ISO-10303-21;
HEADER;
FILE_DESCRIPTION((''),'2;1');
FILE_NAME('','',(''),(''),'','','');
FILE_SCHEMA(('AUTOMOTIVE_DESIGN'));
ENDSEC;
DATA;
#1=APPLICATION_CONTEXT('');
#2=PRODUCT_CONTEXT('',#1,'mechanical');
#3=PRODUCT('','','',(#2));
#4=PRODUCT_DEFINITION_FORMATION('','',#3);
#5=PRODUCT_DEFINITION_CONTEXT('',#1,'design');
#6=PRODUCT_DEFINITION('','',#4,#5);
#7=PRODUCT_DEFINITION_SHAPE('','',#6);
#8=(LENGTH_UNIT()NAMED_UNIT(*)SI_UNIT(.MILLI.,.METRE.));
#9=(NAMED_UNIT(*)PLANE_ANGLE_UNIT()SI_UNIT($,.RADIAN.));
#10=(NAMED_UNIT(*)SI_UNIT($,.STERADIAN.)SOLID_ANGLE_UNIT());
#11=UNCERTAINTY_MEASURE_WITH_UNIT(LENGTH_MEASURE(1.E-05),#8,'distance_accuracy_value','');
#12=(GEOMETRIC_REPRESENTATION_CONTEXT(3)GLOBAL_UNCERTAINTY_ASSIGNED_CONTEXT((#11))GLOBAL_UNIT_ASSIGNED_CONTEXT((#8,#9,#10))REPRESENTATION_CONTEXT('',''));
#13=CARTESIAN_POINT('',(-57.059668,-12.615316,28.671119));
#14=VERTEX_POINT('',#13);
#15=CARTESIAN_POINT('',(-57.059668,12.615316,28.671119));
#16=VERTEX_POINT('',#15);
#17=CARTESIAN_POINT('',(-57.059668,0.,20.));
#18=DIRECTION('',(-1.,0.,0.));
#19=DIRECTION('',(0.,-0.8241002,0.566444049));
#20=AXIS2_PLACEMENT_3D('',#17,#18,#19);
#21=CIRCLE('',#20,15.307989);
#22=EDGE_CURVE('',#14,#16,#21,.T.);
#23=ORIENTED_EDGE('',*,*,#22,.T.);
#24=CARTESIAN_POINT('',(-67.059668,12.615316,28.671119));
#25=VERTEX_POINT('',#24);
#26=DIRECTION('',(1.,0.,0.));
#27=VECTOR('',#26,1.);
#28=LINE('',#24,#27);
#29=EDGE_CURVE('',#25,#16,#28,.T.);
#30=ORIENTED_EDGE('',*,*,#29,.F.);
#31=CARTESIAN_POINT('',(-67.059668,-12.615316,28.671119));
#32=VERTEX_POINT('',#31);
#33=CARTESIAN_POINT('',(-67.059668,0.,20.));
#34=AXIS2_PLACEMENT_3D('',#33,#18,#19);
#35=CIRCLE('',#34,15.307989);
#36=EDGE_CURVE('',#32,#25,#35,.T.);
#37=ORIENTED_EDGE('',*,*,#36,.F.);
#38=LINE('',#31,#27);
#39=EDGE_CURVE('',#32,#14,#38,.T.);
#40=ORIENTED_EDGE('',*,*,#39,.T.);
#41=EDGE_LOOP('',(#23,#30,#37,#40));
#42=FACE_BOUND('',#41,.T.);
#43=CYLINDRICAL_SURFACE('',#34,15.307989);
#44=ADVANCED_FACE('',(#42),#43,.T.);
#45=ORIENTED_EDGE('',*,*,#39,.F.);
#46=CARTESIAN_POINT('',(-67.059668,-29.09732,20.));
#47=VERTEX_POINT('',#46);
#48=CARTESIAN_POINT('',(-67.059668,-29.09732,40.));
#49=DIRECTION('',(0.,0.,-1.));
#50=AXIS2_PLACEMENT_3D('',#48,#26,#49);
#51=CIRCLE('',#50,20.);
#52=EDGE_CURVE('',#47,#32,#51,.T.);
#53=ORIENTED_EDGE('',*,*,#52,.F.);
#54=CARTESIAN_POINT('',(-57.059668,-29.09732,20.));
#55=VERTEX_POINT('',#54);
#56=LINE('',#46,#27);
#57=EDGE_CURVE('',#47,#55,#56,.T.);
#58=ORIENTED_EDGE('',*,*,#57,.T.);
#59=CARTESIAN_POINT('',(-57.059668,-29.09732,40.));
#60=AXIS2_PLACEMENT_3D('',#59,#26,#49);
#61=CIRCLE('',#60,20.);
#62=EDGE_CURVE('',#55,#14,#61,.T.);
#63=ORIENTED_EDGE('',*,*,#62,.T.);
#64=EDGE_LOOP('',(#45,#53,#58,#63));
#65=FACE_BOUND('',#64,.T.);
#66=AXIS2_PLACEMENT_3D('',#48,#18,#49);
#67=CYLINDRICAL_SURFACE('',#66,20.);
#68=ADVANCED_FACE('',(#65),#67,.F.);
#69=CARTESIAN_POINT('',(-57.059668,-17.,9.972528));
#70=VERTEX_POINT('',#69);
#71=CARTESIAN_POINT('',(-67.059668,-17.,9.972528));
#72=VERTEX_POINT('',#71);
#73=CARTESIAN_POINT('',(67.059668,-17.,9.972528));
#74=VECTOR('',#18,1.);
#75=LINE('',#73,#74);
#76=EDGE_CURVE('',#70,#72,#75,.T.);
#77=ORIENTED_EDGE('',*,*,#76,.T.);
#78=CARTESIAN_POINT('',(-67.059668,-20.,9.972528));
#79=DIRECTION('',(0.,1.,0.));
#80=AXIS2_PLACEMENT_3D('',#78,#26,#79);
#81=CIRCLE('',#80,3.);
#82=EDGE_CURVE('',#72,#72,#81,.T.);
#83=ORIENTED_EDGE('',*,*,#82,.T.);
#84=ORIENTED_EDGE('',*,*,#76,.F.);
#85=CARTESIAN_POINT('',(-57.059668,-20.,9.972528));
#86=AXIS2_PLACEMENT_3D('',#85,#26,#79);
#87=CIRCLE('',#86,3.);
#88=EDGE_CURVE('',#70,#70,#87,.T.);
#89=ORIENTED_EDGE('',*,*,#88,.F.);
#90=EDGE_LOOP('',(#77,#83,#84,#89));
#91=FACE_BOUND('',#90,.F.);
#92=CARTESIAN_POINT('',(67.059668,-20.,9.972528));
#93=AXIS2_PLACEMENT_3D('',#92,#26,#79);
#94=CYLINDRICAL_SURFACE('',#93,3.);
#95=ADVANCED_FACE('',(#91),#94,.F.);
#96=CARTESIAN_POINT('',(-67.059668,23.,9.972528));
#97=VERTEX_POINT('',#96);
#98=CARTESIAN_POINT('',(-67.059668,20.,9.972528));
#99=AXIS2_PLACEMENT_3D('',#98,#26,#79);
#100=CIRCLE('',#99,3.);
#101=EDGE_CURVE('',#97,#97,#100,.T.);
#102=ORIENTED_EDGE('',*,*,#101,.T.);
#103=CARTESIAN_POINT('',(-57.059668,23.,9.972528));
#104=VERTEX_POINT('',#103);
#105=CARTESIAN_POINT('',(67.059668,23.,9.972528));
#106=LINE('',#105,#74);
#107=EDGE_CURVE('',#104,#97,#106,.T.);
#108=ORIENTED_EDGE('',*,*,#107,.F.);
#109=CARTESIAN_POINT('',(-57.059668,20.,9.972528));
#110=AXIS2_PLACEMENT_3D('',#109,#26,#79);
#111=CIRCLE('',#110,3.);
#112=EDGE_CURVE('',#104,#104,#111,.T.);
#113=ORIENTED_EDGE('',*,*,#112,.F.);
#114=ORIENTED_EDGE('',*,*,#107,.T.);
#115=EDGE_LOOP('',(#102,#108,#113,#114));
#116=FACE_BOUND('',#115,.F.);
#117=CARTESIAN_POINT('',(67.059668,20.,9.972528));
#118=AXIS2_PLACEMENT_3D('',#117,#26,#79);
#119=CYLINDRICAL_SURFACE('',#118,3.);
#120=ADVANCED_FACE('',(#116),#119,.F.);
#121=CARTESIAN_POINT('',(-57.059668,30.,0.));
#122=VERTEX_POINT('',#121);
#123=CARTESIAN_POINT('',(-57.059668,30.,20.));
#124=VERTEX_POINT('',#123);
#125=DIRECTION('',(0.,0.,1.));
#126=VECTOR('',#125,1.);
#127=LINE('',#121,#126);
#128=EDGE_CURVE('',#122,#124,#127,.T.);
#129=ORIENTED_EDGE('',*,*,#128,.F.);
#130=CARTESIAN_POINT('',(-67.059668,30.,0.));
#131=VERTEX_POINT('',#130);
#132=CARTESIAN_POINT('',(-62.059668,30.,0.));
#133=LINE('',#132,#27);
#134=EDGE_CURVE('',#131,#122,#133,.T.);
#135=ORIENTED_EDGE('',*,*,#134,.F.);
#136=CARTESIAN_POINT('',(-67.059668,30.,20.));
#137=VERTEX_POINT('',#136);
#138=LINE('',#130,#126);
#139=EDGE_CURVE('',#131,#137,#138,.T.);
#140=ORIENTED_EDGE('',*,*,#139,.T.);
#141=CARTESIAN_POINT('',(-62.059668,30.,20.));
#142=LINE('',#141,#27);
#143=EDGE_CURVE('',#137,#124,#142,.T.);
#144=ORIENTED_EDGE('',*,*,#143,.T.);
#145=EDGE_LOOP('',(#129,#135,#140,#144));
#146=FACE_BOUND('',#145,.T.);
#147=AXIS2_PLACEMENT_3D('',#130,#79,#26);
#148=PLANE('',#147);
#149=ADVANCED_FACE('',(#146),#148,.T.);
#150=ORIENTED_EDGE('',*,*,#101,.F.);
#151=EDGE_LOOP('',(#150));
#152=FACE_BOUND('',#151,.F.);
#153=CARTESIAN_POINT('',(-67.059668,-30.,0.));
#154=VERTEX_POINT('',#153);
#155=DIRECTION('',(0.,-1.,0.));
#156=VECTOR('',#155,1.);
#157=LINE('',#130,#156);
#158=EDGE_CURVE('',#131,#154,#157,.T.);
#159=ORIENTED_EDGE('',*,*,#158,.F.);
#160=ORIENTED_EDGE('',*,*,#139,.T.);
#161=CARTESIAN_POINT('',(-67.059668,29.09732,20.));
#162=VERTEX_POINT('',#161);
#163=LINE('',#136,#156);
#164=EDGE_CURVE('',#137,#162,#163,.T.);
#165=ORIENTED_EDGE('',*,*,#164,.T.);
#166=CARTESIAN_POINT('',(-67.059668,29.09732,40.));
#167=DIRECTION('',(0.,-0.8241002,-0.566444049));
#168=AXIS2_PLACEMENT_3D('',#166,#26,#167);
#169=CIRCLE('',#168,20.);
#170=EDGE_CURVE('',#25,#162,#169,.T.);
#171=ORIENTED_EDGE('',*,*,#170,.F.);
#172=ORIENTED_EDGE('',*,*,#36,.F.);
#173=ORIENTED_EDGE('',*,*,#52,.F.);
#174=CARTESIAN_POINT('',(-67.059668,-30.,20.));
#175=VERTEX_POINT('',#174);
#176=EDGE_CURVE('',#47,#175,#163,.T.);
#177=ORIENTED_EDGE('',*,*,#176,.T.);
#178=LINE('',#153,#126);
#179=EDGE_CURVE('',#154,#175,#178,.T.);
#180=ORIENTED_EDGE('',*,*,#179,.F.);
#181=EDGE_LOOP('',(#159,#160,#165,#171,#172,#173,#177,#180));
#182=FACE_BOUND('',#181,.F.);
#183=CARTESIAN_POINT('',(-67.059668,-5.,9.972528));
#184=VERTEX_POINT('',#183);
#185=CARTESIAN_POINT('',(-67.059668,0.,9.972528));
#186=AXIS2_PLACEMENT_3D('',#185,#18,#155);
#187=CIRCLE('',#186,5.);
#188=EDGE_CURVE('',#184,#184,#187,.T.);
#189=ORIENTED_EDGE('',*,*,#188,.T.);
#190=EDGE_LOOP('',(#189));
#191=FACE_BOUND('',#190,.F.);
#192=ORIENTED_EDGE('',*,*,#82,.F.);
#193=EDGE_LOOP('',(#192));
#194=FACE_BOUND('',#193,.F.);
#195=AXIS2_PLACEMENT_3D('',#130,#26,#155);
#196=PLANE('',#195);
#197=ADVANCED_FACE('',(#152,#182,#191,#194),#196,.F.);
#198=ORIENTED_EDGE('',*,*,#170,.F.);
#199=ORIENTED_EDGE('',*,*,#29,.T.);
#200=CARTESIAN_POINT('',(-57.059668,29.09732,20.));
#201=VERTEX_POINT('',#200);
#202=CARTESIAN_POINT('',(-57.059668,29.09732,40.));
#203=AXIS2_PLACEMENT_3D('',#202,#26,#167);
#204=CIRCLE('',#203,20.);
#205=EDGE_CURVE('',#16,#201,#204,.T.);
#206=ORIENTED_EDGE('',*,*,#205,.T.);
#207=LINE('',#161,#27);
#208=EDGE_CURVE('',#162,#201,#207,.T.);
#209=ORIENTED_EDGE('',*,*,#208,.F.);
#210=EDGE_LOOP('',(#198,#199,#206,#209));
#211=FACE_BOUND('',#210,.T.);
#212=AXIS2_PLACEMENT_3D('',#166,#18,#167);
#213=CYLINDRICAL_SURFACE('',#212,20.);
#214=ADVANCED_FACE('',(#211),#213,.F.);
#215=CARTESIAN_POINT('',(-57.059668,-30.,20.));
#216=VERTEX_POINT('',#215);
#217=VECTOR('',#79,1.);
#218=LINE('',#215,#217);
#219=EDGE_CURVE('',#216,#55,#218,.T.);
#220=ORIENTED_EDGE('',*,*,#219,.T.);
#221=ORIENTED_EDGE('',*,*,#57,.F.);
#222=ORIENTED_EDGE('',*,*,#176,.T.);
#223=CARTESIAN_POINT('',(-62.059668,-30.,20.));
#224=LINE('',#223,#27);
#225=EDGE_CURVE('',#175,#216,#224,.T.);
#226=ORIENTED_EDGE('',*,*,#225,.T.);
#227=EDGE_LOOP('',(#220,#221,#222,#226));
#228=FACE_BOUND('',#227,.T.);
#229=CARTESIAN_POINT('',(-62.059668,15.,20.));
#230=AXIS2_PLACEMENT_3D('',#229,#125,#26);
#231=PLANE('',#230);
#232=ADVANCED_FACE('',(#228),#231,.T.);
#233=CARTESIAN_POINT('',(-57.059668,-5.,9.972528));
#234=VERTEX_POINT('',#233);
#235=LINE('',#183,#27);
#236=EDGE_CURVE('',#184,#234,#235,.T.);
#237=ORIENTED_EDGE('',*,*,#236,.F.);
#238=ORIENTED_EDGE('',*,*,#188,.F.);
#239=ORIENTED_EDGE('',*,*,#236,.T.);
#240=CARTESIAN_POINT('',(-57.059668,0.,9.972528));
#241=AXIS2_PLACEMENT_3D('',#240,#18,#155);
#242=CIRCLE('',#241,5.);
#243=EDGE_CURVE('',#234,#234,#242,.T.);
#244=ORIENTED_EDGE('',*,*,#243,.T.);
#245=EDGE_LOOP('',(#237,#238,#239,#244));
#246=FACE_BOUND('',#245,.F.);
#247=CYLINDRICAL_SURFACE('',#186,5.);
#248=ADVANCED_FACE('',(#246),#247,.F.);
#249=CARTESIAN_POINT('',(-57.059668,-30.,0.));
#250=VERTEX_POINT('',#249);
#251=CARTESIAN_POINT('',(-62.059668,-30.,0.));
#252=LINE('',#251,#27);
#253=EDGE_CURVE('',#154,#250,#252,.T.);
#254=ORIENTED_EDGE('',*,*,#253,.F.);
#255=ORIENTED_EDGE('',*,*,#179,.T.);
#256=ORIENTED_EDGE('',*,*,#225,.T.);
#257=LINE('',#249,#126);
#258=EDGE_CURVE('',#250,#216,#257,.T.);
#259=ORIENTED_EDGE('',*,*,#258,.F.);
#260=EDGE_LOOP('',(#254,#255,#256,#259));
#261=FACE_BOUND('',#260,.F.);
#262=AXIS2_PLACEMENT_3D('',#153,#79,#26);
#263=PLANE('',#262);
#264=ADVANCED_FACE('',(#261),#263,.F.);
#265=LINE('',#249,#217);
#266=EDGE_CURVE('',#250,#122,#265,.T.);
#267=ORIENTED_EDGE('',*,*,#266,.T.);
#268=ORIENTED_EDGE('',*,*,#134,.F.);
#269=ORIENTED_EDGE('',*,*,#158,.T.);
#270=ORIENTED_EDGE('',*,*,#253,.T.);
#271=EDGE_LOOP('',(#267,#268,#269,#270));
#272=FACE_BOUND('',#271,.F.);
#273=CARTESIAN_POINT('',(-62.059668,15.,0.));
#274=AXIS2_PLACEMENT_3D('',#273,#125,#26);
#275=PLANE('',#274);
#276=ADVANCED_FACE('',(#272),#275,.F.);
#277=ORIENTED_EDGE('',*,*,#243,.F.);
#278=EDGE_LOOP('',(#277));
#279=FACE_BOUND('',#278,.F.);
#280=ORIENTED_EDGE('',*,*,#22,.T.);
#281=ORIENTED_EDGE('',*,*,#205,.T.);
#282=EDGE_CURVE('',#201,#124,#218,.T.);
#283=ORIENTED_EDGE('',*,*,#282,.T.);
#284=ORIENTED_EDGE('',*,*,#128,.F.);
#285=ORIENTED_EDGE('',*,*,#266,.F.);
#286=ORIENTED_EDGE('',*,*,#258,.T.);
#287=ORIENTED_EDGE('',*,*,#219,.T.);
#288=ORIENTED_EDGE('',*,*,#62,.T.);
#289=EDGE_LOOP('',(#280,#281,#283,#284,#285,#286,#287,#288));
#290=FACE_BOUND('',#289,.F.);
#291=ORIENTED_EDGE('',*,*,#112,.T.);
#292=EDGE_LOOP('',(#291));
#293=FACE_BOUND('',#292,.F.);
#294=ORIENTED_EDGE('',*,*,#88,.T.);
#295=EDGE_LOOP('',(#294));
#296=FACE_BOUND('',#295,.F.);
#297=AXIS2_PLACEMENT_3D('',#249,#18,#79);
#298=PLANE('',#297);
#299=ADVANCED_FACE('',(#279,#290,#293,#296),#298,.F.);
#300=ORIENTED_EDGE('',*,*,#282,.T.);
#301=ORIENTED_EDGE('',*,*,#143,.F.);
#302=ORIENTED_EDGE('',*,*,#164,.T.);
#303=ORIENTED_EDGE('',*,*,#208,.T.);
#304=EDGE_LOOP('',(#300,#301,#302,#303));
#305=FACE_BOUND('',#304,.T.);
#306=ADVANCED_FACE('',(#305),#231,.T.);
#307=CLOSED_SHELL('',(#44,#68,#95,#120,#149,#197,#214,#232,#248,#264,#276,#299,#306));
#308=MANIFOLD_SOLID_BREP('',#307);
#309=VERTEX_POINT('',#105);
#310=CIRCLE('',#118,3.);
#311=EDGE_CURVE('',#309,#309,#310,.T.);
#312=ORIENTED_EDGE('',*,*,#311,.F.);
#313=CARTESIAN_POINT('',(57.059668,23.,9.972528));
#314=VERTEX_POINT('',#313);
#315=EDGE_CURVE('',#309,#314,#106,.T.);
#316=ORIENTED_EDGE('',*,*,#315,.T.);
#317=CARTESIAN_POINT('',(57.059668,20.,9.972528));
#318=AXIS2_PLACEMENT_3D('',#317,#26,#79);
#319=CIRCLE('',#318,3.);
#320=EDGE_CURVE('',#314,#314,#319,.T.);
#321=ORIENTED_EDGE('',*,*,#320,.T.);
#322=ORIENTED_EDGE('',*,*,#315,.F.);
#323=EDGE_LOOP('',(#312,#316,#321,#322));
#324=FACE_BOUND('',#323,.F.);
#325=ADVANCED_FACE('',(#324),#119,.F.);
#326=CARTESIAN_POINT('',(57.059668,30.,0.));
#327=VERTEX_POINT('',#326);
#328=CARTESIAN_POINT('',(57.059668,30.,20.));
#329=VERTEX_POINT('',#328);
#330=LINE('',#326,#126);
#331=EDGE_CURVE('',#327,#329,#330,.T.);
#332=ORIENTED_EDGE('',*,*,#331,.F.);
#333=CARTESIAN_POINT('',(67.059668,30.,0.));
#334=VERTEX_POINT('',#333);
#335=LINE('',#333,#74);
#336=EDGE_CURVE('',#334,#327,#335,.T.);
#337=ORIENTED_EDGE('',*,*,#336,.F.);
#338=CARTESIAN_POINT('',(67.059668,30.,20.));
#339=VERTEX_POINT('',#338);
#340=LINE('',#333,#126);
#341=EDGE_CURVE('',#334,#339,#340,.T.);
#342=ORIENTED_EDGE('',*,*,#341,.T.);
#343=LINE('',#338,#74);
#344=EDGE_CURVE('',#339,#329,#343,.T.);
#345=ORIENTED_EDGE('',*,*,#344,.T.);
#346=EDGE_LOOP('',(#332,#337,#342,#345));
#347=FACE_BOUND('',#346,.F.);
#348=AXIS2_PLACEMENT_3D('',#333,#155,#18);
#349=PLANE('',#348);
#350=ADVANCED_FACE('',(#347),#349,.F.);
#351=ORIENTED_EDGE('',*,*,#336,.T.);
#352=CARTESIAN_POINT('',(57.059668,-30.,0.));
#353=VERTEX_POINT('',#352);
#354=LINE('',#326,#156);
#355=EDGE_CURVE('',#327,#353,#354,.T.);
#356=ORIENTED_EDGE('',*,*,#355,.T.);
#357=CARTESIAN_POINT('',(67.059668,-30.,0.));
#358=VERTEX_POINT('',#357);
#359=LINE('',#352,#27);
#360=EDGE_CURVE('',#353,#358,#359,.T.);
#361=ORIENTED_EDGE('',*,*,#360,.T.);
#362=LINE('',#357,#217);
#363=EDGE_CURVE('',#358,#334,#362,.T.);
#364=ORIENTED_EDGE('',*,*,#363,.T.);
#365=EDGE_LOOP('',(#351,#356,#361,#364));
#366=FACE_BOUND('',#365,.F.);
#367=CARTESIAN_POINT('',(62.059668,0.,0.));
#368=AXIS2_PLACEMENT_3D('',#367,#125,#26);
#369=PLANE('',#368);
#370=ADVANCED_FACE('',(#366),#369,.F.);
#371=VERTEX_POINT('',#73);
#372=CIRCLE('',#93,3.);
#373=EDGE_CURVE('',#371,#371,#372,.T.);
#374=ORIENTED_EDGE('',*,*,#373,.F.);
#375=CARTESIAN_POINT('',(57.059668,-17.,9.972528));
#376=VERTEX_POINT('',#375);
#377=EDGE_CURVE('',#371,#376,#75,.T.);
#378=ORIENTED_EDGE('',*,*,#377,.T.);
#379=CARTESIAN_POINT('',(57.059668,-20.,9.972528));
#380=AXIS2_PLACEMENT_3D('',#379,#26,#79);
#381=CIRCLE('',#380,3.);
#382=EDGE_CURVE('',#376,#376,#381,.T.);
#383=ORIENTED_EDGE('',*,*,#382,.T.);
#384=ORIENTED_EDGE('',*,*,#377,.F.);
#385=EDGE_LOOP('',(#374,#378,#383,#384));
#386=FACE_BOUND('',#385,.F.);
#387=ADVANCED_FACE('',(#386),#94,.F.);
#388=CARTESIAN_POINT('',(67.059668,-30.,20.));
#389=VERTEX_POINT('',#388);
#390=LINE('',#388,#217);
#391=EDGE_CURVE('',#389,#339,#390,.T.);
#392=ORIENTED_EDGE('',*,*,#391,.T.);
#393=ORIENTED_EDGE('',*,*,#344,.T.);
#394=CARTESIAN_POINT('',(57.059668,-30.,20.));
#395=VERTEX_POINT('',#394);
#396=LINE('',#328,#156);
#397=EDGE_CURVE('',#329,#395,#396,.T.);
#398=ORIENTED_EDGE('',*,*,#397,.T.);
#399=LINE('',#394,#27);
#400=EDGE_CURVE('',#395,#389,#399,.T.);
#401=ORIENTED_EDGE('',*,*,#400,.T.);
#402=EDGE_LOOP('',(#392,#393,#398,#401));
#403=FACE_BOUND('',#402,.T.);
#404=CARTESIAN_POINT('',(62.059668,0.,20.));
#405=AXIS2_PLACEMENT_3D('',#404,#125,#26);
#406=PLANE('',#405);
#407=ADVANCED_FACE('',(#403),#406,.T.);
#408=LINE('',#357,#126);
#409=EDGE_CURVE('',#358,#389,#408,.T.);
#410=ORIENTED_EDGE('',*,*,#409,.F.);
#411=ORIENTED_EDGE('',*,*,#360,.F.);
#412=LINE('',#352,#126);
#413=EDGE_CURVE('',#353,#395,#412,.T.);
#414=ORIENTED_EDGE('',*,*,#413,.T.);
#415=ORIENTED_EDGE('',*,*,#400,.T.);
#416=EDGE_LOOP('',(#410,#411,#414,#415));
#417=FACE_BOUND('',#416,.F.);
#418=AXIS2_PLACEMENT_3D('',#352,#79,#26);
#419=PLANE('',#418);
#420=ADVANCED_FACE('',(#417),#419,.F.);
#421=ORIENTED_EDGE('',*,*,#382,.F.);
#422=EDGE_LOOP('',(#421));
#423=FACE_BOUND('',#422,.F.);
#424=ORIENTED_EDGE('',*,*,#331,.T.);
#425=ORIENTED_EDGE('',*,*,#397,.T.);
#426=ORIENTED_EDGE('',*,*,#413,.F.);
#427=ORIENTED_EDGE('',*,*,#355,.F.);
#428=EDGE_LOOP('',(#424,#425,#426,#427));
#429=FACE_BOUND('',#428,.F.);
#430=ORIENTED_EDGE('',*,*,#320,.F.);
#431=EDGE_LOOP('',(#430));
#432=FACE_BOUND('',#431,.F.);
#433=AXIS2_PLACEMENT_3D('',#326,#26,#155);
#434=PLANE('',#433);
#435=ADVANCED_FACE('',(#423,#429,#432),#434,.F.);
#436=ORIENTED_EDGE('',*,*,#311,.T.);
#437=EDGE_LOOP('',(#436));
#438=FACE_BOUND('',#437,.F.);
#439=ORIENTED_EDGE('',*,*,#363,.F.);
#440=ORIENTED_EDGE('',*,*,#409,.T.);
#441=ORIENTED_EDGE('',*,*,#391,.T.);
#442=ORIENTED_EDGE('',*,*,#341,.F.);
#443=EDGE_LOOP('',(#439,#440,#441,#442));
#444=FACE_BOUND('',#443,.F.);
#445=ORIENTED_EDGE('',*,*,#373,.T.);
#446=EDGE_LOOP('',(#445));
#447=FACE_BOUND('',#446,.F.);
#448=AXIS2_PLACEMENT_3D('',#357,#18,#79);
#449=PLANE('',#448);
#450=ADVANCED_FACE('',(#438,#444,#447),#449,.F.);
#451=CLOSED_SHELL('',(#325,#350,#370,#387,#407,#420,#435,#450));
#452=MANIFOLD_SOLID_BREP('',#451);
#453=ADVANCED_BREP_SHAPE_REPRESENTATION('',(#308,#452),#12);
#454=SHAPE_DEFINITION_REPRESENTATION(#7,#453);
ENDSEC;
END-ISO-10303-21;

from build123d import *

# Parameters (mm, degrees)
F0_W     = 10
F0_H     = 30
F1_DEPTH = 20
F2_R     = 3
F3_DEPTH = 175
F5_DEPTH = 10
F6_R     = 5
F7_DEPTH = 31.6


with BuildPart() as f1:
    # F0 (on Top) → F1 (new body)
    with BuildSketch(Plane.XY):
        with Locations((-62.0596675936, 15)):
            Rectangle(F0_W, F0_H)
        with Locations((-62.0596675936, -15)):
            Rectangle(F0_W, F0_H)
    extrude(amount=F1_DEPTH)


with BuildPart() as f1b:
    # F0 (on Top) → F1, piece 2 (new body)
    with BuildSketch(Plane.XY):
        Polygon((67.0596675936, 0), (67.0596675936, 30), (57.0596675936, 30), (57.0596675936, 0), (57.0596675936, -30), (67.0596675936, -30), align=None)
    extrude(amount=F1_DEPTH)


with BuildPart() as f3_tool:
    # F2 (on face) → F3 (new body)
    with BuildSketch(Plane.YZ.offset(67.0596675936)):
        with Locations((20, 9.9725276232)):
            Circle(F2_R)
        with Locations((-20, 9.9725276232)):
            Circle(F2_R)
    extrude(amount=-F3_DEPTH)


with BuildPart() as f1_1:
    add(f1.part)

    # F3: cut by f3_tool
    add(f3_tool.part, mode=Mode.SUBTRACT)

    # F4 (on face) → F5 (join, through all)
    with BuildSketch(Plane(origin=(-67.0596675936, 0, 0), x_dir=(0, -1, 0), z_dir=(-1, 0, 0))):
        with BuildLine():
            ThreePointArc((29.0973204207, 20), (19.7854360685, 22.3000336212), (12.6153164249, 28.6711190189))
            ThreePointArc((12.6153164249, 28.6711190189), (0, 35.3079885531), (-12.6153164249, 28.6711190189))
            ThreePointArc((-12.6153164249, 28.6711190189), (-19.7854360685, 22.3000336212), (-29.0973204207, 20))
            Line((-29.0973204207, 20), (29.0973204207, 20))
        make_face()
    extrude(amount=-F5_DEPTH)

    # F6 (on face) → F7 (cut)
    with BuildSketch(Plane(origin=(-67.0596675936, 0, 0), x_dir=(0, -1, 0), z_dir=(-1, 0, 0))):
        with Locations((0, 9.9725276232)):
            Circle(F6_R)
    extrude(amount=-F7_DEPTH, mode=Mode.SUBTRACT)


with BuildPart() as f1b_1:
    add(f1b.part)

    # F3: cut by f3_tool
    add(f3_tool.part, mode=Mode.SUBTRACT)


solid = Compound([f1_1.part, f1b_1.part])
